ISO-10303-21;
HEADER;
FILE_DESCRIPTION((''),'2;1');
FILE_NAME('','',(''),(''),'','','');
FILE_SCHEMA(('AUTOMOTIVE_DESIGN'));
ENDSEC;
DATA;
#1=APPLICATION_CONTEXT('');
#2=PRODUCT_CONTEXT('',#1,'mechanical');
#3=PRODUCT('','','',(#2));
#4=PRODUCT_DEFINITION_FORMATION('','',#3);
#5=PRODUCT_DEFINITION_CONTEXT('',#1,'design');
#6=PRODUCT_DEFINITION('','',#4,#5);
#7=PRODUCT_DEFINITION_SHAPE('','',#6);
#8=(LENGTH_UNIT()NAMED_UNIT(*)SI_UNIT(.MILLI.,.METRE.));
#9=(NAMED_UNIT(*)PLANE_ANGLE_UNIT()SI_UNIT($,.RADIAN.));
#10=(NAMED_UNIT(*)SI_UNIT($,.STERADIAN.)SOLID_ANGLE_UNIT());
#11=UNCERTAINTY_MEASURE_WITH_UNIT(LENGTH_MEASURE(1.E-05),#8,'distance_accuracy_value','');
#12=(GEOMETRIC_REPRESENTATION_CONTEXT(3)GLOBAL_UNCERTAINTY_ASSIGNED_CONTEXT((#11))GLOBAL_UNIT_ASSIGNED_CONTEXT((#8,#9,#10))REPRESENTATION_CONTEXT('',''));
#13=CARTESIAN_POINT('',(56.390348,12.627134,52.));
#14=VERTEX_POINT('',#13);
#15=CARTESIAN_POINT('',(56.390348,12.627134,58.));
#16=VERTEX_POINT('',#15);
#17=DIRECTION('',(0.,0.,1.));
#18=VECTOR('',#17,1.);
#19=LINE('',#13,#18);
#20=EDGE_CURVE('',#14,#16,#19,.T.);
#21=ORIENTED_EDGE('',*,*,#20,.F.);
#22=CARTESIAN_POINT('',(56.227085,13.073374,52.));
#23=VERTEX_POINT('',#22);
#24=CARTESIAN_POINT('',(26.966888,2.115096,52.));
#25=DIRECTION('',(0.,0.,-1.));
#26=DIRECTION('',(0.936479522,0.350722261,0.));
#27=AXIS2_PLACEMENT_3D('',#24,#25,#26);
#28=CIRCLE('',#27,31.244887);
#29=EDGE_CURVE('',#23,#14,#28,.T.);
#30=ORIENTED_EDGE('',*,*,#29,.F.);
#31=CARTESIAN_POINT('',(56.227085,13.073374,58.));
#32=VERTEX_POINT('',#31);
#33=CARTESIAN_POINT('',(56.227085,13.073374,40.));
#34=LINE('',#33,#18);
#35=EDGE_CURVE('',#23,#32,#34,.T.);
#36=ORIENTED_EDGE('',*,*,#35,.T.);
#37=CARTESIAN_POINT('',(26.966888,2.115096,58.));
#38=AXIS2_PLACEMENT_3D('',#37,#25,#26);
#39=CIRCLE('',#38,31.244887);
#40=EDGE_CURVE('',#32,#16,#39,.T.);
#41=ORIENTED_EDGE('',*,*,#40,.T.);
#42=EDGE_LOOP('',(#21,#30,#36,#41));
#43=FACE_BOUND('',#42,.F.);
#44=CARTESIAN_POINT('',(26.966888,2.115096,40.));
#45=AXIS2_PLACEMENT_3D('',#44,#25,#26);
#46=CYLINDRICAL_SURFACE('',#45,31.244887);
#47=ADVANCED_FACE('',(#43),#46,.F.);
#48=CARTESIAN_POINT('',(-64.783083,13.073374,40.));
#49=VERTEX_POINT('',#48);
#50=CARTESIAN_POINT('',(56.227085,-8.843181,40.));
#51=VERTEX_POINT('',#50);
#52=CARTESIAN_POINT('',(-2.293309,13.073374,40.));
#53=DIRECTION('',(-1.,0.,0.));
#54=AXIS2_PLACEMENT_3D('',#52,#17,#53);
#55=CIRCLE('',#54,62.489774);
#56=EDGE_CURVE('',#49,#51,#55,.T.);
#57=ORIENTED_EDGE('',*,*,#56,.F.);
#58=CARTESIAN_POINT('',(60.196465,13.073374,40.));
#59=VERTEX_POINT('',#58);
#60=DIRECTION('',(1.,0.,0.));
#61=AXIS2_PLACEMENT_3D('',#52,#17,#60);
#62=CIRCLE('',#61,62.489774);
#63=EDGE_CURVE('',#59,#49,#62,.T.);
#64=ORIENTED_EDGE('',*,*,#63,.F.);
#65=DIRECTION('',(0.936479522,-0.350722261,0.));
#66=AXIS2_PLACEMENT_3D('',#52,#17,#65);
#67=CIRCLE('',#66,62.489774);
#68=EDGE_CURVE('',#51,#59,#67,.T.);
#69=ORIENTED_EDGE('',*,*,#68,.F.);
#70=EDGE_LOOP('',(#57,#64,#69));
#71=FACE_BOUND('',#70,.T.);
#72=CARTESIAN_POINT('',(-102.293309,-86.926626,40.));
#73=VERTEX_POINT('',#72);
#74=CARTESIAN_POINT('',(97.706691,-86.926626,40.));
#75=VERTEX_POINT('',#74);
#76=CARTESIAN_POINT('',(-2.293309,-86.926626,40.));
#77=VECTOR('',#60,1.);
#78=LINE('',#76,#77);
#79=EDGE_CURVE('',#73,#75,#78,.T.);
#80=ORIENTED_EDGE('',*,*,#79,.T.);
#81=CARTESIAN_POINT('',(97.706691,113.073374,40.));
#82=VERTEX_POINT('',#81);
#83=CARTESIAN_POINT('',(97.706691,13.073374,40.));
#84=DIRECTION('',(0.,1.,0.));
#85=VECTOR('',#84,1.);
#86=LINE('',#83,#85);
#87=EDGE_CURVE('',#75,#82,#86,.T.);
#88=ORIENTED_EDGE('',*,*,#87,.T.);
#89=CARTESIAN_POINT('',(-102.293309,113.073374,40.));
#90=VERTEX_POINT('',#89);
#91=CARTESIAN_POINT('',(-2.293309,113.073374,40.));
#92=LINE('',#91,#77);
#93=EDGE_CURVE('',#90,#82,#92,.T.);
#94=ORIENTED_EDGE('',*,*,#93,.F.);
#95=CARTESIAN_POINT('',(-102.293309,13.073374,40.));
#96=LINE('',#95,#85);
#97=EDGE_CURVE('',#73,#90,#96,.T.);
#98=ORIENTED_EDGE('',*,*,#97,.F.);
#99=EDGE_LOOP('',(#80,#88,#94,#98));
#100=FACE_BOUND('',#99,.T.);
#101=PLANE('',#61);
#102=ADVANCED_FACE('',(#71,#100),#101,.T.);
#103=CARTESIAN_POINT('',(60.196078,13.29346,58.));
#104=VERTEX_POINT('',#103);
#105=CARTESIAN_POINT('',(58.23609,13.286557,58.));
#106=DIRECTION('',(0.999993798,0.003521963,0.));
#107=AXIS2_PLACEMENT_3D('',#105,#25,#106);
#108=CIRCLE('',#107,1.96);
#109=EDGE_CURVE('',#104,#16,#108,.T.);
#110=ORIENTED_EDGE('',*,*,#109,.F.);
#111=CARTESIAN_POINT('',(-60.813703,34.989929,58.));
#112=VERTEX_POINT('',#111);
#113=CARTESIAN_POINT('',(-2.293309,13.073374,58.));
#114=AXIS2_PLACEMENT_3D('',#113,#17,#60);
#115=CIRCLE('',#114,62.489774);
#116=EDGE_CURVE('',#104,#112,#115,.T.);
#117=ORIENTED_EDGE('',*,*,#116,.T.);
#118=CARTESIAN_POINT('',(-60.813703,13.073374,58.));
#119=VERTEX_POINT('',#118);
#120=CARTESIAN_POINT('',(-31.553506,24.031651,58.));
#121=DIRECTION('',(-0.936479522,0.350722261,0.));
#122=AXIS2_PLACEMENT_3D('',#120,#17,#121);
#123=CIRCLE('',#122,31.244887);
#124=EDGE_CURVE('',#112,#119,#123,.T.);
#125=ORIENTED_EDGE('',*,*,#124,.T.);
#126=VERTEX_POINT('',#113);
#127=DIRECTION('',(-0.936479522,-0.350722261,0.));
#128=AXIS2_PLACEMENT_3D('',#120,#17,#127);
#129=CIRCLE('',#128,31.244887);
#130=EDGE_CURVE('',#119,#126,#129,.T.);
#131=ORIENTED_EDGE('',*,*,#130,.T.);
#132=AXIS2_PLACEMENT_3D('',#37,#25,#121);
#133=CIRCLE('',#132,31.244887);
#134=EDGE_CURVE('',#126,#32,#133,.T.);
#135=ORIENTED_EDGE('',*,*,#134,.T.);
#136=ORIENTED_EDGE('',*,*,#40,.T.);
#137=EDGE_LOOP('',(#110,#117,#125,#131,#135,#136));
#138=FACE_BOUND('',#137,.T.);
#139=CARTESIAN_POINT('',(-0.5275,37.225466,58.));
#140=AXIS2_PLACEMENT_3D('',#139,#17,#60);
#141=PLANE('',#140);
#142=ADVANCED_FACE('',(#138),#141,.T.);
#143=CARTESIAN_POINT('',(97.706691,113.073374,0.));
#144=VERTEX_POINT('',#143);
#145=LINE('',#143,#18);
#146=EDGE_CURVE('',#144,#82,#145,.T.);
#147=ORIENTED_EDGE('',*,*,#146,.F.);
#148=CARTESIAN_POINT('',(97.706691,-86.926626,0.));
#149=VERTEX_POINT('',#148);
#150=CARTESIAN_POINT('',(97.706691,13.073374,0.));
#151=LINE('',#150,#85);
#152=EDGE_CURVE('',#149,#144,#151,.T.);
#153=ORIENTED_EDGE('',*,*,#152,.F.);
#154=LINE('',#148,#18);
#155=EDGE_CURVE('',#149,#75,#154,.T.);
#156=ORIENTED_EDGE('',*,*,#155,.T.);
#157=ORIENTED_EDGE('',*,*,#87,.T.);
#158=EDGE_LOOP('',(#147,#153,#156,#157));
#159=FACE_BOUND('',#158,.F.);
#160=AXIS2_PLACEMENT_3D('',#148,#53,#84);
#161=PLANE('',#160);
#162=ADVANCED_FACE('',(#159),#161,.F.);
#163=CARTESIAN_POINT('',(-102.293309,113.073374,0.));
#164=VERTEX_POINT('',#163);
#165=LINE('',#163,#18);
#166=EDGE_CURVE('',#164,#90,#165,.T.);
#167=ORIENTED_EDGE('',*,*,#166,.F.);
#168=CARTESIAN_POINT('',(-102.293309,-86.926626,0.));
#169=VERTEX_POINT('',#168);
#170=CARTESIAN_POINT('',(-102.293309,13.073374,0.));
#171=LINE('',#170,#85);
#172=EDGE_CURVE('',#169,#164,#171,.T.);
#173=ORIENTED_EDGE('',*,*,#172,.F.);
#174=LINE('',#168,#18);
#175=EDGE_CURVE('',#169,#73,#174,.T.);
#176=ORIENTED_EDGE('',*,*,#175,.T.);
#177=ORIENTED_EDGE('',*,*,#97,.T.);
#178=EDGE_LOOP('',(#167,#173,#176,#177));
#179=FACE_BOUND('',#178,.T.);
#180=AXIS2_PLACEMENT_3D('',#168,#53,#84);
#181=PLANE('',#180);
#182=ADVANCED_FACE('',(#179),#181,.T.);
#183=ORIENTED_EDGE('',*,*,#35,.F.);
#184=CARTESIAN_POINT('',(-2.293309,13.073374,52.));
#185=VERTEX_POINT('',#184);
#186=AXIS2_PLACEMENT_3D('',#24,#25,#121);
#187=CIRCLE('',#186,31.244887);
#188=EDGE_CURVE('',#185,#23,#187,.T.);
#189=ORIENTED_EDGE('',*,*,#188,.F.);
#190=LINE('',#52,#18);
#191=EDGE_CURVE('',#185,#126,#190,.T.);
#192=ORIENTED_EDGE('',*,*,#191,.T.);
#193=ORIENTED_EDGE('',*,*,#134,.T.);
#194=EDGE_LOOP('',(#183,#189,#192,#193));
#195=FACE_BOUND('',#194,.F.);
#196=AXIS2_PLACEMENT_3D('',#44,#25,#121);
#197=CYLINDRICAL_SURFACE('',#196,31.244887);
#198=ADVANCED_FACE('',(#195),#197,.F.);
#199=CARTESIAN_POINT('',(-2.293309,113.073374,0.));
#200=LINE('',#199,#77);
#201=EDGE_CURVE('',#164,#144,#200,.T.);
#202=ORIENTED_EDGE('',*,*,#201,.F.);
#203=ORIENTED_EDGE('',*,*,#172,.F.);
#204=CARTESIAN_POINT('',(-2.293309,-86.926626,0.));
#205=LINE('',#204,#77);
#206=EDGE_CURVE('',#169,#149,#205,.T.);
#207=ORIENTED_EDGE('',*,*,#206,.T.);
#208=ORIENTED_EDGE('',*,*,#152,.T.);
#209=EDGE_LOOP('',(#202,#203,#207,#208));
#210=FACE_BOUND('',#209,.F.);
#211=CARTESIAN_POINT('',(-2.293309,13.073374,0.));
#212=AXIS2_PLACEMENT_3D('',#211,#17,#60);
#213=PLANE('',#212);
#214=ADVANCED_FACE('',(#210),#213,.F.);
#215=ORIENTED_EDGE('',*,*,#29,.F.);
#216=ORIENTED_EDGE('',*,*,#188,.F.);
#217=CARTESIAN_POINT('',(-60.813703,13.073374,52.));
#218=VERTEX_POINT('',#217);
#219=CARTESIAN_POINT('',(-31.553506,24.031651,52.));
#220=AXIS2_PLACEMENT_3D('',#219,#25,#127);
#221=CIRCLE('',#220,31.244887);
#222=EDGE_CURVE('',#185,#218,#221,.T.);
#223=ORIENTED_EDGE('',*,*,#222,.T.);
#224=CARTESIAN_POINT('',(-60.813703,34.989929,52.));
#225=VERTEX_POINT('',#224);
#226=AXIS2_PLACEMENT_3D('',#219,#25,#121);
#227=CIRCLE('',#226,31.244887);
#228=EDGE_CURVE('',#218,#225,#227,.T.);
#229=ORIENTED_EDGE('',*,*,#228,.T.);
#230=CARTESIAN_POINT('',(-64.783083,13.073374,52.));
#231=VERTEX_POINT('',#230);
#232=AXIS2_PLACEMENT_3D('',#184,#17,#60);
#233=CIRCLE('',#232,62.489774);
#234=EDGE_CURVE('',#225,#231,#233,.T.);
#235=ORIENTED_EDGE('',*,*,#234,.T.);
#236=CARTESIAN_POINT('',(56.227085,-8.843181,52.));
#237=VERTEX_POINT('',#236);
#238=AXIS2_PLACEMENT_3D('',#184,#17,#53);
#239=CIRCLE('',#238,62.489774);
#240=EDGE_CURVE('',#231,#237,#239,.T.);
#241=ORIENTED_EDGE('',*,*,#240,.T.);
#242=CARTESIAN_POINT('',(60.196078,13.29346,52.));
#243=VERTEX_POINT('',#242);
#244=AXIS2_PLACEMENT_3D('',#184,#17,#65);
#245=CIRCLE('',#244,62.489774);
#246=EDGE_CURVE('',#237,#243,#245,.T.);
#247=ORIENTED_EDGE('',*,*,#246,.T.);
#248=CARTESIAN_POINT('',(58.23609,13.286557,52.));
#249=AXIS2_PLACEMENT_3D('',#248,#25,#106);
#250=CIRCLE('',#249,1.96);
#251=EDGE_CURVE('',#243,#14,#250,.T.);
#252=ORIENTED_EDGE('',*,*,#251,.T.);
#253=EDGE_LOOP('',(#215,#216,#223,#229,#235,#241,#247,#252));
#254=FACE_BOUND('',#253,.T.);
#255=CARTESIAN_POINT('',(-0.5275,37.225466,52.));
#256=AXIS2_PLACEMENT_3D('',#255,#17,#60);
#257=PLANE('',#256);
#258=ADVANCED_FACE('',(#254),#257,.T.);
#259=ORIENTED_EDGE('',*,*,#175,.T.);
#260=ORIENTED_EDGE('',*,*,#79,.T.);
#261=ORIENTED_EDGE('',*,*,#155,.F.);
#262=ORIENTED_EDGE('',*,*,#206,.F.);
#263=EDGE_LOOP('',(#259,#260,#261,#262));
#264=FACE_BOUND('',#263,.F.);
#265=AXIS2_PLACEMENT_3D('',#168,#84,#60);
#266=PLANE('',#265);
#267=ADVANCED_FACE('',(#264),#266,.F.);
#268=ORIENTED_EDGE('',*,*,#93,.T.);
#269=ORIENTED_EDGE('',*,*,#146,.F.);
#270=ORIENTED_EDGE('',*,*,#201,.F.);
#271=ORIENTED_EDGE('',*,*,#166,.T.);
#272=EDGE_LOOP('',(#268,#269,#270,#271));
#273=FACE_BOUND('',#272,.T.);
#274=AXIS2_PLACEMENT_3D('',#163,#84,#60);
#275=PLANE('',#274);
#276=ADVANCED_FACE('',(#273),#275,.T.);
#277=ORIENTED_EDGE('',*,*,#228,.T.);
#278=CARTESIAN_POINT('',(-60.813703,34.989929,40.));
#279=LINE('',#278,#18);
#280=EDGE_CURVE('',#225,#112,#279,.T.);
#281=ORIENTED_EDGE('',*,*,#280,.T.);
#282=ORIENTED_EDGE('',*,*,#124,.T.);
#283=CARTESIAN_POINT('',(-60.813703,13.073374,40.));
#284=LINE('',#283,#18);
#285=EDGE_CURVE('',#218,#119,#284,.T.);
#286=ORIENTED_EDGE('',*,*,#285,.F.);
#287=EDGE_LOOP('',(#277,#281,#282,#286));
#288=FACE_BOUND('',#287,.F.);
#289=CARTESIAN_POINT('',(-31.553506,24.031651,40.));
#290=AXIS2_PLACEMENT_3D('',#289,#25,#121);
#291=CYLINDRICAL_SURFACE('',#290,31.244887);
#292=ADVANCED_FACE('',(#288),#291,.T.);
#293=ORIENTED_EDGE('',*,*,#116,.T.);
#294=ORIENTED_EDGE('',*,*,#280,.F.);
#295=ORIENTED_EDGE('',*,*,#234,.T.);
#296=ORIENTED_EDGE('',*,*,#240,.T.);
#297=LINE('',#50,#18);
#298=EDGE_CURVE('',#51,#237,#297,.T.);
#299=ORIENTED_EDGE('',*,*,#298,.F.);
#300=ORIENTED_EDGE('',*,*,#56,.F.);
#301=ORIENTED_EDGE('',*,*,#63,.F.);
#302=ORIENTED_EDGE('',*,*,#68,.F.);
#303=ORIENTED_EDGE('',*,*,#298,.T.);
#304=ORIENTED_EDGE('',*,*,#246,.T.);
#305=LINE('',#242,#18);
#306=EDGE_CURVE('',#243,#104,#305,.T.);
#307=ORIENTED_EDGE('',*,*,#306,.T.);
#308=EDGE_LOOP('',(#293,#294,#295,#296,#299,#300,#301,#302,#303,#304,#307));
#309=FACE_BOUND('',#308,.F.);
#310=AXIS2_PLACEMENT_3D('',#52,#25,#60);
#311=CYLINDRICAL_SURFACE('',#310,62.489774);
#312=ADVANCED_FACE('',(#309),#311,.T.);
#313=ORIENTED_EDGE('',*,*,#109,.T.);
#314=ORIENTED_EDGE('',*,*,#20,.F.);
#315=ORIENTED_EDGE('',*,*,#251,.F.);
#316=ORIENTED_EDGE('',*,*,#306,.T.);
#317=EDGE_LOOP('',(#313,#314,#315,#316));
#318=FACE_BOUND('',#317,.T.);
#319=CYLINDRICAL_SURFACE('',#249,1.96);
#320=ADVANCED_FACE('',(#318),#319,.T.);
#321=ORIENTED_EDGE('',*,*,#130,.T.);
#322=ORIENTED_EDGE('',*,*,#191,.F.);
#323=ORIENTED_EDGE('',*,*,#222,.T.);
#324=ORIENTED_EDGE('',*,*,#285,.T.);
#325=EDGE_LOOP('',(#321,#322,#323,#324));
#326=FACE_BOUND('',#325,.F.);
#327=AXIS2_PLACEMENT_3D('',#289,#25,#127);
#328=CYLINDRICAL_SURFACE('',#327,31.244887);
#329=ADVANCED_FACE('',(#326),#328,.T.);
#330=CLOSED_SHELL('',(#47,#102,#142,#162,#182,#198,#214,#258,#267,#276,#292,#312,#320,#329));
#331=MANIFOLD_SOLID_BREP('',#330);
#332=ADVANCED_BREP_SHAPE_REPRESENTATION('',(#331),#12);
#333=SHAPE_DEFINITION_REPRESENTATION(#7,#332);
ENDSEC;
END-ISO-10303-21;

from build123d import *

# Parameters (mm, degrees)
F0_W        = 200
F0_H        = 200
F1_DEPTH    = 40
F3_DEPTH    = 12
F4_DEPTH    = 18
F5_T1_DEPTH = 62.2240943671


# Not quite as in the source:
# - a fillet or chamfer that OpenCascade refuses, or shapes differently, is made with other operations: its cross-section is extruded or revolved along the edge and cut away or added


with BuildPart() as f1:
    # F0 (on Top) → F1 (new body)
    with BuildSketch(Plane.XY):
        with Locations((-2.2933091968, 13.0733736824)):
            Rectangle(F0_W, F0_H)
    extrude(amount=F1_DEPTH)

    # F2 (on face) → F3 (join)
    with BuildSketch(Plane.XY.offset(40)):
        with BuildLine():
            Line((56.2270847505, 13.0733736824), (60.1964650758, 13.0733736824))
            ThreePointArc((60.1964650758, 13.0733736824), (8.8432450397, 74.5627959303), (-60.8137031442, 34.9899286326))
            ThreePointArc((-60.8137031442, 34.9899286326), (-62.7983933068, 24.0316511575), (-60.8137031442, 13.0733736824))
            Line((-60.8137031442, 13.0733736824), (-2.2933091968, 13.0733736824))
            ThreePointArc((-2.2933091968, 13.0733736824), (26.9668877768, 33.3599833436), (56.2270847505, 13.0733736824))
        make_face()
        with BuildLine():
            Line((-2.2933091968, 13.0733736824), (-60.8137031442, 13.0733736824))
            ThreePointArc((-60.8137031442, 13.0733736824), (-31.5535061705, -7.2132359788), (-2.2933091968, 13.0733736824))
        make_face()
        with BuildLine():
            ThreePointArc((-64.7830834694, 13.0733736824), (-13.4298634334, -48.4160485655), (56.2270847505, -8.8431812678))
            ThreePointArc((56.2270847505, -8.8431812678), (58.2117749131, 2.1150962073), (56.2270847505, 13.0733736824))
            Line((56.2270847505, 13.0733736824), (-2.2933091968, 13.0733736824))
            ThreePointArc((-2.2933091968, 13.0733736824), (-31.5535061705, -7.2132359788), (-60.8137031442, 13.0733736824))
            Line((-60.8137031442, 13.0733736824), (-64.7830834694, 13.0733736824))
        make_face()
        with BuildLine():
            ThreePointArc((-60.8137031442, 13.0733736824), (-62.7983933068, 24.0316511575), (-60.8137031442, 34.9899286326))
            ThreePointArc((-60.8137031442, 34.9899286326), (-63.7827314447, 24.2099279189), (-64.7830834694, 13.0733736824))
            Line((-64.7830834694, 13.0733736824), (-60.8137031442, 13.0733736824))
        make_face()
        with BuildLine():
            Line((-2.2933091968, 13.0733736824), (56.2270847505, 13.0733736824))
            ThreePointArc((56.2270847505, 13.0733736824), (26.9668877768, 33.3599833436), (-2.2933091968, 13.0733736824))
        make_face()
        with BuildLine():
            ThreePointArc((56.2270847505, -8.8431812678), (59.196113051, 1.9368194459), (60.1964650758, 13.0733736824))
            Line((60.1964650758, 13.0733736824), (56.2270847505, 13.0733736824))
            ThreePointArc((56.2270847505, 13.0733736824), (58.2117749131, 2.1150962073), (56.2270847505, -8.8431812678))
        make_face()
    extrude(amount=F3_DEPTH)

    # F2 (on face) → F4 (join)
    with BuildSketch(Plane.XY.offset(40)):
        with BuildLine():
            Line((56.2270847505, 13.0733736824), (60.1964650758, 13.0733736824))
            ThreePointArc((60.1964650758, 13.0733736824), (8.8432450397, 74.5627959303), (-60.8137031442, 34.9899286326))
            ThreePointArc((-60.8137031442, 34.9899286326), (-62.7983933068, 24.0316511575), (-60.8137031442, 13.0733736824))
            Line((-60.8137031442, 13.0733736824), (-2.2933091968, 13.0733736824))
            ThreePointArc((-2.2933091968, 13.0733736824), (26.9668877768, 33.3599833436), (56.2270847505, 13.0733736824))
        make_face()
        with BuildLine():
            Line((-2.2933091968, 13.0733736824), (-60.8137031442, 13.0733736824))
            ThreePointArc((-60.8137031442, 13.0733736824), (-31.5535061705, -7.2132359788), (-2.2933091968, 13.0733736824))
        make_face()
        with BuildLine():
            ThreePointArc((56.2270847505, -8.8431812678), (59.196113051, 1.9368194459), (60.1964650758, 13.0733736824))
            Line((60.1964650758, 13.0733736824), (56.2270847505, 13.0733736824))
            ThreePointArc((56.2270847505, 13.0733736824), (58.2117749131, 2.1150962073), (56.2270847505, -8.8431812678))
        make_face()
    extrude(amount=F4_DEPTH)

    # F5: fillet of radius 1.96 on 2 edges, made by hand

    # F5_s2 → F5_t1 (cut)
    with BuildSketch(Plane.XY.offset(52)):
        with BuildLine():
            ThreePointArc((60.196077506, 13.2934603584), (58.5741142709, 11.3559254547), (56.3903482373, 12.627134387))
            ThreePointArc((56.3903482373, 12.627134387), (58.2108716144, 1.8775122879), (56.2270847505, -8.8431812678))
            ThreePointArc((56.2270847505, -8.8431812678), (59.2156290063, 2.0451186179), (60.196077506, 13.2934603584))
        make_face()
    extrude(amount=F5_T1_DEPTH, mode=Mode.SUBTRACT)


solid = f1.part
